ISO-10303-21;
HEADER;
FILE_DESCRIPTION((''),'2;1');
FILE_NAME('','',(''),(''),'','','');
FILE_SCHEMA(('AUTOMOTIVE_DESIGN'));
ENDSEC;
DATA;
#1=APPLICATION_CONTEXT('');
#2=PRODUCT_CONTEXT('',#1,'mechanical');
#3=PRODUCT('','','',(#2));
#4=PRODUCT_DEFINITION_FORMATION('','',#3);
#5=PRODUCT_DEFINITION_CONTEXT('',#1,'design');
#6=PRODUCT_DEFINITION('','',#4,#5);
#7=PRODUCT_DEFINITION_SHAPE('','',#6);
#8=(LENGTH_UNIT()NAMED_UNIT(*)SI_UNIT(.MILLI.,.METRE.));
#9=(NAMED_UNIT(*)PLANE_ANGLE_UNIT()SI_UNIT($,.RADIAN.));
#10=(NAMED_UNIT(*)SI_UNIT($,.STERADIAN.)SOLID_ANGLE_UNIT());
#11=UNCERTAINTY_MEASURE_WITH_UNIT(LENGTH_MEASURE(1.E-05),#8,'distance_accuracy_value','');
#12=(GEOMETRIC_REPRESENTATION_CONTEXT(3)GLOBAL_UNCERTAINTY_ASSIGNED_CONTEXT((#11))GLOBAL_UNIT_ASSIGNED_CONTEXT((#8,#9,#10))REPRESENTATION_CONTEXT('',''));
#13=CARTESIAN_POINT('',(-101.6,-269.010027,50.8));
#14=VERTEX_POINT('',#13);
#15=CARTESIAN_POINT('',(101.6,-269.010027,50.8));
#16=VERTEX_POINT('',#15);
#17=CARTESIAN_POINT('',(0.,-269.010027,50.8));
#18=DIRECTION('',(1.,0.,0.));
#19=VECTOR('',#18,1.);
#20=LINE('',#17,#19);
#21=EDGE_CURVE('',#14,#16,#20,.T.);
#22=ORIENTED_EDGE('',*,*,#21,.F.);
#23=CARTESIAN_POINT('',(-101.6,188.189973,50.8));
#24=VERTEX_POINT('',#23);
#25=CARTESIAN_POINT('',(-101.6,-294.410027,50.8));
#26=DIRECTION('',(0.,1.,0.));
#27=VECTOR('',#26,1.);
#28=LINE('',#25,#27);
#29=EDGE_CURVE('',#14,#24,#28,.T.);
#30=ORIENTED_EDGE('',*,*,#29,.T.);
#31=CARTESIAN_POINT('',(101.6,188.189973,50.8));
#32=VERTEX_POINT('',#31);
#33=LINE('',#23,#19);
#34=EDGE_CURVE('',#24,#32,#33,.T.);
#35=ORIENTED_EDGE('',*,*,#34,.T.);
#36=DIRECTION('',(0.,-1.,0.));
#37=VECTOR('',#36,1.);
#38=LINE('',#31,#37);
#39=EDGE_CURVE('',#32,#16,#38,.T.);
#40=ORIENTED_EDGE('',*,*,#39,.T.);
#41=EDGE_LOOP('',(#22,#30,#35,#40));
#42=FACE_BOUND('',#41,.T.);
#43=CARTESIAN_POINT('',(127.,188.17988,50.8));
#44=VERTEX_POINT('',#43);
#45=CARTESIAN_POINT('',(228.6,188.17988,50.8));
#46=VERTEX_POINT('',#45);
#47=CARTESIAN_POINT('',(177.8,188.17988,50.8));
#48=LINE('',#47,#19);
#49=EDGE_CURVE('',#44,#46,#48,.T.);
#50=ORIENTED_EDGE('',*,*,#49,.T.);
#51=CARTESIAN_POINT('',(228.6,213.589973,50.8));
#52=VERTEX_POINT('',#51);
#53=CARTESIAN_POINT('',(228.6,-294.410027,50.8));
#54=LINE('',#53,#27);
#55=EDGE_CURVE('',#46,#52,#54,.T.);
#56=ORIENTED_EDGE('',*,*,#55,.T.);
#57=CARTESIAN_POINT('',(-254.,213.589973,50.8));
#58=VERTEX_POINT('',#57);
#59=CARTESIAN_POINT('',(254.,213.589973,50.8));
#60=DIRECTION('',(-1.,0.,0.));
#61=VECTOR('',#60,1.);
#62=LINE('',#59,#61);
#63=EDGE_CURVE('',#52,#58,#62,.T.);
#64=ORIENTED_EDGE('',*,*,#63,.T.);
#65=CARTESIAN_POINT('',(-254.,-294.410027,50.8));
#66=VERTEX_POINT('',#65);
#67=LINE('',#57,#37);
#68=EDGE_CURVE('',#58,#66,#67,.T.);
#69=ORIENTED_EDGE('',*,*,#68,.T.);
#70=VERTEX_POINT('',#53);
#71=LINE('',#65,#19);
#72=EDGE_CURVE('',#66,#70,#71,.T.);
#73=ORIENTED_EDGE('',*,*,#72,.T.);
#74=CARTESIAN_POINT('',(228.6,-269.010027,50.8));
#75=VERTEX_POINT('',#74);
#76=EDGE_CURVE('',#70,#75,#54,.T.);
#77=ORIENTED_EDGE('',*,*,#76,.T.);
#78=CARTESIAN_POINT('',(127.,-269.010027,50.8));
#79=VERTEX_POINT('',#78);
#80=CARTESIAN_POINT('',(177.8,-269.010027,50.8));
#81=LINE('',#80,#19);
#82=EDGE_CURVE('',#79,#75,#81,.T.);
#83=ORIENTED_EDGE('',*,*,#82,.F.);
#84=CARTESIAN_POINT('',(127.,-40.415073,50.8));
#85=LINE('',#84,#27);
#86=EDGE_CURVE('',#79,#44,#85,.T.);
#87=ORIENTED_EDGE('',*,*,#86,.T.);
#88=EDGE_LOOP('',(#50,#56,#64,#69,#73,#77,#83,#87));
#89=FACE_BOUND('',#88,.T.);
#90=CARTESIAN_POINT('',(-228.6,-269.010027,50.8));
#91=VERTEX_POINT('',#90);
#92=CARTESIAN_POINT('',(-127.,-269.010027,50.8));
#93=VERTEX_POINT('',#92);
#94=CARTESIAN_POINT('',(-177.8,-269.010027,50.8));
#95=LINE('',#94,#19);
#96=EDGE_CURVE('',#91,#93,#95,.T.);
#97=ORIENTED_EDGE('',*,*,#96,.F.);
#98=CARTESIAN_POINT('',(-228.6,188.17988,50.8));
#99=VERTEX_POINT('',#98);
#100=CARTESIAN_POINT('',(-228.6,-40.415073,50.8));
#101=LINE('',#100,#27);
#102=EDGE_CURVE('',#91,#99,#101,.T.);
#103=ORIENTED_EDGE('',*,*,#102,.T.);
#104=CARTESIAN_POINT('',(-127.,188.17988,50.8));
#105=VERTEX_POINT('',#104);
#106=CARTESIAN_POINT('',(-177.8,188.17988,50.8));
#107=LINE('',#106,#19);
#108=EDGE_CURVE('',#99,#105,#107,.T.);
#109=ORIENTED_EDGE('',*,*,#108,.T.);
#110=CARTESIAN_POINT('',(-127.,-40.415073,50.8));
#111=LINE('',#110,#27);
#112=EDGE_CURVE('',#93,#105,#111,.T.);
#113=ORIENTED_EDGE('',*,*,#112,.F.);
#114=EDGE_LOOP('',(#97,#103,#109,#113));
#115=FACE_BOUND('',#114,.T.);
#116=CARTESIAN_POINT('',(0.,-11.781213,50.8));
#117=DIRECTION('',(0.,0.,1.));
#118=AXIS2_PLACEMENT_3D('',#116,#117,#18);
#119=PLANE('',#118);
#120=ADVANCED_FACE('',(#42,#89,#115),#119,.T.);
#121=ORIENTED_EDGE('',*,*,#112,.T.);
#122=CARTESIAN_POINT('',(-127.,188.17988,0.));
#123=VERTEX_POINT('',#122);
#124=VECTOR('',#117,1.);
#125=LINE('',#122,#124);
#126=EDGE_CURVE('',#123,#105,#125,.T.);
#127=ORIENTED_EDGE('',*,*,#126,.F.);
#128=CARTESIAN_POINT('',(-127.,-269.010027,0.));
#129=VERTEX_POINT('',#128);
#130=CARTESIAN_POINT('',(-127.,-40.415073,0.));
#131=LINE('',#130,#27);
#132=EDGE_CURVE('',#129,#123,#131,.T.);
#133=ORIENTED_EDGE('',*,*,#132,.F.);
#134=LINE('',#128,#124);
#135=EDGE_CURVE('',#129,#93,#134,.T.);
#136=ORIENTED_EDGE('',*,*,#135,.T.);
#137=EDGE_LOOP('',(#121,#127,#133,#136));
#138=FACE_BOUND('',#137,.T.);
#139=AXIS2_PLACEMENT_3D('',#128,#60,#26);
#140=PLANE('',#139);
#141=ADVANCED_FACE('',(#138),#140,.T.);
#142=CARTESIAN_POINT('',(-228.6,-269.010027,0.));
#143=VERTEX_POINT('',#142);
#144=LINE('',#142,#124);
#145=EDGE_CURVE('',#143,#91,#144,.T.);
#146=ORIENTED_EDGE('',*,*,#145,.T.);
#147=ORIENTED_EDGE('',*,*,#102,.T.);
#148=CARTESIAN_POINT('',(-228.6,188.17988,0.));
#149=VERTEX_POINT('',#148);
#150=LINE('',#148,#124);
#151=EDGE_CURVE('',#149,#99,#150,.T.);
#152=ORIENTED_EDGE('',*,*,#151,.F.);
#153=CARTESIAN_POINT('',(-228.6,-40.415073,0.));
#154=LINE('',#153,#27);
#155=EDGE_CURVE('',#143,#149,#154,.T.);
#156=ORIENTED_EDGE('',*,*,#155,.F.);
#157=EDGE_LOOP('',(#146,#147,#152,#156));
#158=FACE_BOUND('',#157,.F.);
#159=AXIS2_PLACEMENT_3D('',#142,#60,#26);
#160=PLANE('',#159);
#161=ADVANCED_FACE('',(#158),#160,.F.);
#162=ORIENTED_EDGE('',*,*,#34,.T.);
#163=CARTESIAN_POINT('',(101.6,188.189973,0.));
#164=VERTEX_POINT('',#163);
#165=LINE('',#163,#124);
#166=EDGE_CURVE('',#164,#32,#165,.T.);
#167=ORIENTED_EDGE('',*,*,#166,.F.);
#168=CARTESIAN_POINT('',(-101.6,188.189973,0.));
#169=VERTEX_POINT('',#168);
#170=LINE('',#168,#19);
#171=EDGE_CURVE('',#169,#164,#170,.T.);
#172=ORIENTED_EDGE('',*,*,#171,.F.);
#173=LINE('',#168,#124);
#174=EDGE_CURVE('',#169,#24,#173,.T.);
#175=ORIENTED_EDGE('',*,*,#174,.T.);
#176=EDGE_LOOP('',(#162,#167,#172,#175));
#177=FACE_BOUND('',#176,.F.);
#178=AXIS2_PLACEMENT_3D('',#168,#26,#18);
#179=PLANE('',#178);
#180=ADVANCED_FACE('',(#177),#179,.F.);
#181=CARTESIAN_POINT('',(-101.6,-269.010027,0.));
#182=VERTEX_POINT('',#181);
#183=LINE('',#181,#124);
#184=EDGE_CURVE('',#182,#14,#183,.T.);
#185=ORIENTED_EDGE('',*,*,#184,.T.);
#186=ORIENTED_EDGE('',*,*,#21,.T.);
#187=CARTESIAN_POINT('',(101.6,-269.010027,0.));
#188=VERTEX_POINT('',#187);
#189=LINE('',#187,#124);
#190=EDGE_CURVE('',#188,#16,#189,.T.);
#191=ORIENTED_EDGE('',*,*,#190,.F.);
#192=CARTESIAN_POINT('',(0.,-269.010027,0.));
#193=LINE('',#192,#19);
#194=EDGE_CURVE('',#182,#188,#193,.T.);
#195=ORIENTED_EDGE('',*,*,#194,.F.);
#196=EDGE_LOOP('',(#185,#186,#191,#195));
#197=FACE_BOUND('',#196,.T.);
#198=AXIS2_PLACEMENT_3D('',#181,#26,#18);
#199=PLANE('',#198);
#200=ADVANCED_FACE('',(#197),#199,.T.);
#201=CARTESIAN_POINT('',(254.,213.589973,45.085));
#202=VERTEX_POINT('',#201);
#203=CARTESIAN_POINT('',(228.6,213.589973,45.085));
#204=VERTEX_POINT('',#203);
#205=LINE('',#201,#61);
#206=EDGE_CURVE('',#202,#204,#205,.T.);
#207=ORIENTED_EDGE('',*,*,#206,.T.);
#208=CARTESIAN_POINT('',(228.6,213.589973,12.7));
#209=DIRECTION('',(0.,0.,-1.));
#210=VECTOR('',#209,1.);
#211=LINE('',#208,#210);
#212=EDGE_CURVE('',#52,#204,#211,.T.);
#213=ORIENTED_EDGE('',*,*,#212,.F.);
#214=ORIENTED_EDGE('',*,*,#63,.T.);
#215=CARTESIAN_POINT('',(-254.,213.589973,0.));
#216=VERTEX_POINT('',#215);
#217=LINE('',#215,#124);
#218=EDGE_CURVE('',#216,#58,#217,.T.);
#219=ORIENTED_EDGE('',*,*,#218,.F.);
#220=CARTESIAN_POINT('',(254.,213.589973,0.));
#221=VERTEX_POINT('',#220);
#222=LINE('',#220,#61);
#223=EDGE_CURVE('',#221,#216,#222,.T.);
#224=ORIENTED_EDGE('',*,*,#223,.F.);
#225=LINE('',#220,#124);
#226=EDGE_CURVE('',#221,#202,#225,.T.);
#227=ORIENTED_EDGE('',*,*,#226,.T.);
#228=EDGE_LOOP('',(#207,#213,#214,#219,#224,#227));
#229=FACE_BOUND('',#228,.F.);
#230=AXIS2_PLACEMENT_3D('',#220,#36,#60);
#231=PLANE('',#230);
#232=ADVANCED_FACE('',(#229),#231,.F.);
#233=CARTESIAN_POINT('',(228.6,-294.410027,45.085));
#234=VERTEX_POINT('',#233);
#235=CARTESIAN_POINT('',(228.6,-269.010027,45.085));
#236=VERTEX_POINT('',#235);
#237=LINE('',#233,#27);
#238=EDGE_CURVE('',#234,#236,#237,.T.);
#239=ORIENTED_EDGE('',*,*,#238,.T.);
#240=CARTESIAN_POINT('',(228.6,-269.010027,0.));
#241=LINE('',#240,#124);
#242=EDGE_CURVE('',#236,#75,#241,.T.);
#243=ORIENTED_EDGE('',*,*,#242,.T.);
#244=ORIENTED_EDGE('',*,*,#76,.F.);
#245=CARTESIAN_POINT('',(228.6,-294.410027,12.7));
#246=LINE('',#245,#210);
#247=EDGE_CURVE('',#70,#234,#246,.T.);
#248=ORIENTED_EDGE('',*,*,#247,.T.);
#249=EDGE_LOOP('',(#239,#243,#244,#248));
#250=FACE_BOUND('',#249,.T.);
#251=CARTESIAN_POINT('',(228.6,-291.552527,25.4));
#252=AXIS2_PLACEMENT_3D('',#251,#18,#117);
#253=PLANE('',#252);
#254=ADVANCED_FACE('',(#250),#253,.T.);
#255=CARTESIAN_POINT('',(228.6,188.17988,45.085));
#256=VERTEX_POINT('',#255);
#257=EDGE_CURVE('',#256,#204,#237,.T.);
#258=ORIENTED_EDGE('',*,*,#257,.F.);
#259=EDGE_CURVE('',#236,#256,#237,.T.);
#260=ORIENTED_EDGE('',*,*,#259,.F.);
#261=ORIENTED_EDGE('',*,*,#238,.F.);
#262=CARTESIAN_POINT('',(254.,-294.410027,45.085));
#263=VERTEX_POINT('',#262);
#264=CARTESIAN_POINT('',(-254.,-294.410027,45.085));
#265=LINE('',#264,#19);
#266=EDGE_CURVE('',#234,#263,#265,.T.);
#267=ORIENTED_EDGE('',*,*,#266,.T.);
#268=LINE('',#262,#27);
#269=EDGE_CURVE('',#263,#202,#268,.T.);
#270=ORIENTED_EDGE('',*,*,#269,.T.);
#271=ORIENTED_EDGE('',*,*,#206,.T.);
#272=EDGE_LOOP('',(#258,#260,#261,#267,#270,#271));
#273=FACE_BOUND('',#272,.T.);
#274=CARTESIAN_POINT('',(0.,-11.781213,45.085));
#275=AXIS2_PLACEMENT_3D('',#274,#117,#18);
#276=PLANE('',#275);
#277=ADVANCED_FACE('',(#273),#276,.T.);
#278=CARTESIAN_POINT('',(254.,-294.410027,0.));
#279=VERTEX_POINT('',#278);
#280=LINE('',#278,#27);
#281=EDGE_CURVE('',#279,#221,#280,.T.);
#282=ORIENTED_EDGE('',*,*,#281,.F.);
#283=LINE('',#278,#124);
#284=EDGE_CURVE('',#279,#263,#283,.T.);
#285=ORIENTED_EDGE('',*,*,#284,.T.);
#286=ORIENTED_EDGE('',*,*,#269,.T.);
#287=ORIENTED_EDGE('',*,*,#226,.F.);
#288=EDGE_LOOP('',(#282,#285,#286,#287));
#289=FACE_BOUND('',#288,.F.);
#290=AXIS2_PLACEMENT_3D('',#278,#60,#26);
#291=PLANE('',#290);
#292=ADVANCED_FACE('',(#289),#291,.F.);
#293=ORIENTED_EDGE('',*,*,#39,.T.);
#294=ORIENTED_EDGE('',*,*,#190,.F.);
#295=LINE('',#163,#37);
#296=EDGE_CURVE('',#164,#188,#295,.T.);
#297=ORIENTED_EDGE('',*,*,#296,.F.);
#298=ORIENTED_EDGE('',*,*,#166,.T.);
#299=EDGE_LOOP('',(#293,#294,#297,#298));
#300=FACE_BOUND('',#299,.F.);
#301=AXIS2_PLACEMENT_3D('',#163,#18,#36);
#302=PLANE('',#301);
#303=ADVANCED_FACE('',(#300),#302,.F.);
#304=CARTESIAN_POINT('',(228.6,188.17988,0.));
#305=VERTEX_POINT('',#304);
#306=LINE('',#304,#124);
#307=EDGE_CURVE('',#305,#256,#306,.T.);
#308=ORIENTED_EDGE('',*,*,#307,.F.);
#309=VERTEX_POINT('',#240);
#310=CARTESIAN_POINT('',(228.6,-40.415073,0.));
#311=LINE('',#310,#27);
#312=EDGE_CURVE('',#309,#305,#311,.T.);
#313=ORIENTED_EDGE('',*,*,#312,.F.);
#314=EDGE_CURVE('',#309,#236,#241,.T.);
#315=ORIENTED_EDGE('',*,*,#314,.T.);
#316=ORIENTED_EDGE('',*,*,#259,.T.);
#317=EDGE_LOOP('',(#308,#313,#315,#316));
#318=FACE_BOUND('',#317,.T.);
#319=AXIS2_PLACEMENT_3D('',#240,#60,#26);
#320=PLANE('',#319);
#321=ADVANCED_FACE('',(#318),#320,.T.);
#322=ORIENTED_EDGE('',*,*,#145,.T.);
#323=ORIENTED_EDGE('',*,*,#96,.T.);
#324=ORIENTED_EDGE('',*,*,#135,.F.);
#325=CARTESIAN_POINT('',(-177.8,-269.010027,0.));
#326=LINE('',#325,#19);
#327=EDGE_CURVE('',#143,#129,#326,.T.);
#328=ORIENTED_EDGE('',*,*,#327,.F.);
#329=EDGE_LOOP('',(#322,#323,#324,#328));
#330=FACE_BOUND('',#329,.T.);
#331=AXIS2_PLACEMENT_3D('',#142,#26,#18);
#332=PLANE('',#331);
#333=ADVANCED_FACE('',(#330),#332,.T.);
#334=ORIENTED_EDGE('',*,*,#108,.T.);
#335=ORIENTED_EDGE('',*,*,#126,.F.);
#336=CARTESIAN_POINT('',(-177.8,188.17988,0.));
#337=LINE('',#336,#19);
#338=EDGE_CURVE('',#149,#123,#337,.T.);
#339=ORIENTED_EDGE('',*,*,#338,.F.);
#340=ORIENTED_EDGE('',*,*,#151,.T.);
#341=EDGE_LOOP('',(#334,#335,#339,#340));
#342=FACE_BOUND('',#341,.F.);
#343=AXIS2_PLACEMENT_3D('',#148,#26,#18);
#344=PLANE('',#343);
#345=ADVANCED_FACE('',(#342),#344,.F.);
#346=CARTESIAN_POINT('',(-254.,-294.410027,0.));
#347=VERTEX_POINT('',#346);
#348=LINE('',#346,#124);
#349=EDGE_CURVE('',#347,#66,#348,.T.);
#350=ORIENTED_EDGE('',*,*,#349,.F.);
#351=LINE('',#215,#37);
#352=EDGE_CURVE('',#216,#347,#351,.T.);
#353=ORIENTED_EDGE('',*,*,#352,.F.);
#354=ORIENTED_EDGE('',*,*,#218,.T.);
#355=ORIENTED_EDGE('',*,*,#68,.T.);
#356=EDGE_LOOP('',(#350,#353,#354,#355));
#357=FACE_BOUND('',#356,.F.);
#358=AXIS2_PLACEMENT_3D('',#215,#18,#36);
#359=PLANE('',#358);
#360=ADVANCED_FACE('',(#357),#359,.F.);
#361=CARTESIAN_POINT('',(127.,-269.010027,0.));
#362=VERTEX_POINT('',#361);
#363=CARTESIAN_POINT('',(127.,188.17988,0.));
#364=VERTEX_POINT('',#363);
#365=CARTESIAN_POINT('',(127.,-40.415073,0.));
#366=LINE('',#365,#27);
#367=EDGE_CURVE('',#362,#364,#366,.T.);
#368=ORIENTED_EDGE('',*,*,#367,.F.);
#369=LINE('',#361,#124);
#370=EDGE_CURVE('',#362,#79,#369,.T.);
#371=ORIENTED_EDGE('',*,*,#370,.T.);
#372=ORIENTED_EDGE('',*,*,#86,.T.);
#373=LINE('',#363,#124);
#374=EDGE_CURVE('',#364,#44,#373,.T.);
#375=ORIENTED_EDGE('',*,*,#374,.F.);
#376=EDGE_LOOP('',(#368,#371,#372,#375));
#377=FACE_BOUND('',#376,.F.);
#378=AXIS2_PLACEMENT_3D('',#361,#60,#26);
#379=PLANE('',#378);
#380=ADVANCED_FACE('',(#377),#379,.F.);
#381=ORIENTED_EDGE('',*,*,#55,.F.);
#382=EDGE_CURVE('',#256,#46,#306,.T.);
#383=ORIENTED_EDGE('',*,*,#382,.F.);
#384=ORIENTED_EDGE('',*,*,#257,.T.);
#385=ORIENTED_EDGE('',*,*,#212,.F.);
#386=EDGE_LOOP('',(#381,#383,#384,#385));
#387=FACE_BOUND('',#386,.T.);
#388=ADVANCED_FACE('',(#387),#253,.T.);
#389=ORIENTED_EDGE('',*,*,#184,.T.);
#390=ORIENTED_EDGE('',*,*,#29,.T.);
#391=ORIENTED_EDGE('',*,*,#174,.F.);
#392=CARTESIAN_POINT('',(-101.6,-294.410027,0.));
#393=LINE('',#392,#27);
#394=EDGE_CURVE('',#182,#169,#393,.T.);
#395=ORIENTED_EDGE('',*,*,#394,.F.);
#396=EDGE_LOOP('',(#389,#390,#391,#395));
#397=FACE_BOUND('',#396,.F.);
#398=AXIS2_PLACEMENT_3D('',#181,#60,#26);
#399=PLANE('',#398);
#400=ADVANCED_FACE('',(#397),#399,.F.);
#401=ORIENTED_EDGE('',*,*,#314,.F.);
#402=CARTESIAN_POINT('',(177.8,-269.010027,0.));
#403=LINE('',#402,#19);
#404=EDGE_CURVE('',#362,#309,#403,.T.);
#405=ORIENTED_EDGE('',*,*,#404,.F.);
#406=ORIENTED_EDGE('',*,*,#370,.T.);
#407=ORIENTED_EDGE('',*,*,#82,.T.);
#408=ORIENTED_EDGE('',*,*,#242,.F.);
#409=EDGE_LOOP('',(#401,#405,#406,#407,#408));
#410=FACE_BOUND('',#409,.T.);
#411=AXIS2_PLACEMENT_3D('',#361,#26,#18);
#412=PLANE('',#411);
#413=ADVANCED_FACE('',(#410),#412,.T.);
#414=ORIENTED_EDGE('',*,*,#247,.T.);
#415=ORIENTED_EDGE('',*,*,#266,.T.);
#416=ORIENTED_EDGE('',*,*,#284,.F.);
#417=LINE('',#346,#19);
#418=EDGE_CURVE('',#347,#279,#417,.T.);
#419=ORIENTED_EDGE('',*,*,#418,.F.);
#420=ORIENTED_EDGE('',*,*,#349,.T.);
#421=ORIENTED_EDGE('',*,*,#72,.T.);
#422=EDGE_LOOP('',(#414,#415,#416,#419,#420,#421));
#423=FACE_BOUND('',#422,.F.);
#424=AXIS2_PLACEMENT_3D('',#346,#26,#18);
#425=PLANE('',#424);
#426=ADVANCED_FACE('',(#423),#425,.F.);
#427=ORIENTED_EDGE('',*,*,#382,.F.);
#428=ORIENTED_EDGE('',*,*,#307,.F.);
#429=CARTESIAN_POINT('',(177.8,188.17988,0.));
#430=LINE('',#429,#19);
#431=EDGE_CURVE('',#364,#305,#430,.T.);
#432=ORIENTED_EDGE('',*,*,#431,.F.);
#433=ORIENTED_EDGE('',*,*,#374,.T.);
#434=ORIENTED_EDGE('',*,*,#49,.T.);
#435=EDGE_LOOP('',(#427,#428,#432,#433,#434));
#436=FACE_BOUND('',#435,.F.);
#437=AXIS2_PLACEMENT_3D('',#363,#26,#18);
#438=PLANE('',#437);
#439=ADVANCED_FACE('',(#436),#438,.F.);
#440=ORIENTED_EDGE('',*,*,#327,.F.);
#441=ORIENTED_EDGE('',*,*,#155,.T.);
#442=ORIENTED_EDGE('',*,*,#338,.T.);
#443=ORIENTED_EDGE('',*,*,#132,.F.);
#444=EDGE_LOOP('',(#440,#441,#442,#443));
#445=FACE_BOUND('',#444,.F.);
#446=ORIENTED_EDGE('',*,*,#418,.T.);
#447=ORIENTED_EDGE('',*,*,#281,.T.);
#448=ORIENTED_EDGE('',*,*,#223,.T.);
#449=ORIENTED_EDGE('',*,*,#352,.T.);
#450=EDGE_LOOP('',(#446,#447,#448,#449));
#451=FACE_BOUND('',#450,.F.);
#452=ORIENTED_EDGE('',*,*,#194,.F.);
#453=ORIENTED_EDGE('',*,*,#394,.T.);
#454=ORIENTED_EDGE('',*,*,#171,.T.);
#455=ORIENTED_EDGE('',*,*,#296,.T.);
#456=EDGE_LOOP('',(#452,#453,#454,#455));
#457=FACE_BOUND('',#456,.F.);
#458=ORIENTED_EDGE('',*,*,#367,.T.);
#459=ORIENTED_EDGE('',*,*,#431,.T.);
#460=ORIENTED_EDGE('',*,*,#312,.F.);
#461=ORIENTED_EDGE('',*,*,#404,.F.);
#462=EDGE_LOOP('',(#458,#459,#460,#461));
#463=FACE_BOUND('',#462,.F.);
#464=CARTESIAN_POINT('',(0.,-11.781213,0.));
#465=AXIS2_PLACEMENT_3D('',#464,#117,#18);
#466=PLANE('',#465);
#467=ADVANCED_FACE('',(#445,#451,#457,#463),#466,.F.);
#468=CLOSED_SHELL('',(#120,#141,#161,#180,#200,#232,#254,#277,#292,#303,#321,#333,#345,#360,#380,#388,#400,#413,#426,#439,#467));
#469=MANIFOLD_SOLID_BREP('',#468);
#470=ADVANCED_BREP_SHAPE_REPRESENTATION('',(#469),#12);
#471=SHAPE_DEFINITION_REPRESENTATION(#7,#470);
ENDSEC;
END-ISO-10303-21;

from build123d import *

# Parameters (mm, degrees)
F0_W        = 101.6
F0_H        = 457.1899072886
F0_W_2      = 203.2
F0_H_2      = 25.4
F1_DEPTH    = 50.8
F2_T        = 45.085
F2_T3_DEPTH = 140.97


# Not quite as in the source:
# - a shell that OpenCascade refuses in one call is made with other operations: the cavity is built on its own and cut out


with BuildPart() as f1:
    # F0 (on Top) → F1 (new body)
    with BuildSketch(Plane.XY):
        Polygon((-228.6, 213.5899730921), (-254, 213.5899730921), (-254, 188.1798803806), (-254, -213.5899730921), (-254, -294.4100269079), (-228.6, -294.4100269079), (-127, -294.4100269079), (-101.6, -294.4100269079), (-101.6, -269.0100269079), (-101.6, 188.1798803806), (-101.6, 188.1899730921), (101.6, 188.1899730921), (101.6, -269.0100269079), (101.6, -294.4100269079), (254, -294.4100269079), (254, -269.0100269079), (254, 213.5899730921), (101.6, 213.5899730921), (-101.6, 213.5899730921), (-127, 213.5899730921), align=None)
        with Locations((-177.8, -40.4150732636)):
            Rectangle(F0_W, F0_H, mode=Mode.SUBTRACT)
        with Locations((177.8, -40.4150732636)):
            Rectangle(F0_W, F0_H, mode=Mode.SUBTRACT)
        with Locations((0, -281.7100269079)):
            Rectangle(F0_W_2, F0_H_2)
    extrude(amount=F1_DEPTH)

    # F2: shell of thickness 45.085, made by hand


with BuildPart() as f2_core1:
    # F2_t2: copy of F1
    add(f1.part)

    # the walls: a layer under each face that stays
    f2_faces = [f2_core1.faces().sort_by_distance(p)[0] for p in [
        (-101.6, -40.4100269079, 25.4),
        (0, 188.1899730921, 25.4),
        (0, -269.0100269079, 25.4),
        (-228.6, -40.4150732636, 25.4),
        (-177.8, 188.1798803806, 25.4),
        (-177.8, -269.0100269079, 25.4),
        (177.8, 188.1798803806, 25.4),
        (177.8, -269.0100269079, 25.4),
        (127, -40.4150732636, 25.4),
        (-237.0666666667, -277.4766935746, 0),
    ]]
    thicken(f2_faces, amount=-F2_T, mode=Mode.SUBTRACT)

    # F2_s4 → F2_t3 (cut)
    with BuildSketch(Plane.XY.offset(-45.085)):
        Polygon((-101.14915, -268.5591769079), (-146.685, -269.0100269079), (-146.685, -314.0950269079), (-101.6, -314.0950269079), align=None)
        Polygon((-101.14915, 187.7391230921), (-146.685, 188.1899730921), (-146.685, 233.2749730921), (-101.6, 233.2749730921), align=None)
        Polygon((-228.14915, -268.5591769079), (-273.685, -269.0100269079), (-273.685, -314.0950269079), (-228.6, -314.0950269079), align=None)
        Polygon((-228.14915, 187.7290303806), (-273.685, 188.1798803806), (-273.685, 233.2648803806), (-228.6, 233.2648803806), align=None)
        Polygon((127.45085, 187.7290303806), (127, 233.2648803806), (81.915, 233.2648803806), (81.915, 188.1798803806), align=None)
        Polygon((127.45085, -268.5591769079), (127, -314.0950269079), (81.915, -314.0950269079), (81.915, -269.0100269079), align=None)
    extrude(amount=F2_T3_DEPTH, mode=Mode.SUBTRACT)


with BuildPart() as f1_1:
    add(f1.part)

    # what is left inside the walls is the cavity
    f2_cavity = [f2_core1.part.solids().sort_by_distance(p)[0] for p in [
        (241.3, -125.076694, 45.53585),
    ]]
    add(f2_cavity, mode=Mode.SUBTRACT)


solid = f1_1.part
